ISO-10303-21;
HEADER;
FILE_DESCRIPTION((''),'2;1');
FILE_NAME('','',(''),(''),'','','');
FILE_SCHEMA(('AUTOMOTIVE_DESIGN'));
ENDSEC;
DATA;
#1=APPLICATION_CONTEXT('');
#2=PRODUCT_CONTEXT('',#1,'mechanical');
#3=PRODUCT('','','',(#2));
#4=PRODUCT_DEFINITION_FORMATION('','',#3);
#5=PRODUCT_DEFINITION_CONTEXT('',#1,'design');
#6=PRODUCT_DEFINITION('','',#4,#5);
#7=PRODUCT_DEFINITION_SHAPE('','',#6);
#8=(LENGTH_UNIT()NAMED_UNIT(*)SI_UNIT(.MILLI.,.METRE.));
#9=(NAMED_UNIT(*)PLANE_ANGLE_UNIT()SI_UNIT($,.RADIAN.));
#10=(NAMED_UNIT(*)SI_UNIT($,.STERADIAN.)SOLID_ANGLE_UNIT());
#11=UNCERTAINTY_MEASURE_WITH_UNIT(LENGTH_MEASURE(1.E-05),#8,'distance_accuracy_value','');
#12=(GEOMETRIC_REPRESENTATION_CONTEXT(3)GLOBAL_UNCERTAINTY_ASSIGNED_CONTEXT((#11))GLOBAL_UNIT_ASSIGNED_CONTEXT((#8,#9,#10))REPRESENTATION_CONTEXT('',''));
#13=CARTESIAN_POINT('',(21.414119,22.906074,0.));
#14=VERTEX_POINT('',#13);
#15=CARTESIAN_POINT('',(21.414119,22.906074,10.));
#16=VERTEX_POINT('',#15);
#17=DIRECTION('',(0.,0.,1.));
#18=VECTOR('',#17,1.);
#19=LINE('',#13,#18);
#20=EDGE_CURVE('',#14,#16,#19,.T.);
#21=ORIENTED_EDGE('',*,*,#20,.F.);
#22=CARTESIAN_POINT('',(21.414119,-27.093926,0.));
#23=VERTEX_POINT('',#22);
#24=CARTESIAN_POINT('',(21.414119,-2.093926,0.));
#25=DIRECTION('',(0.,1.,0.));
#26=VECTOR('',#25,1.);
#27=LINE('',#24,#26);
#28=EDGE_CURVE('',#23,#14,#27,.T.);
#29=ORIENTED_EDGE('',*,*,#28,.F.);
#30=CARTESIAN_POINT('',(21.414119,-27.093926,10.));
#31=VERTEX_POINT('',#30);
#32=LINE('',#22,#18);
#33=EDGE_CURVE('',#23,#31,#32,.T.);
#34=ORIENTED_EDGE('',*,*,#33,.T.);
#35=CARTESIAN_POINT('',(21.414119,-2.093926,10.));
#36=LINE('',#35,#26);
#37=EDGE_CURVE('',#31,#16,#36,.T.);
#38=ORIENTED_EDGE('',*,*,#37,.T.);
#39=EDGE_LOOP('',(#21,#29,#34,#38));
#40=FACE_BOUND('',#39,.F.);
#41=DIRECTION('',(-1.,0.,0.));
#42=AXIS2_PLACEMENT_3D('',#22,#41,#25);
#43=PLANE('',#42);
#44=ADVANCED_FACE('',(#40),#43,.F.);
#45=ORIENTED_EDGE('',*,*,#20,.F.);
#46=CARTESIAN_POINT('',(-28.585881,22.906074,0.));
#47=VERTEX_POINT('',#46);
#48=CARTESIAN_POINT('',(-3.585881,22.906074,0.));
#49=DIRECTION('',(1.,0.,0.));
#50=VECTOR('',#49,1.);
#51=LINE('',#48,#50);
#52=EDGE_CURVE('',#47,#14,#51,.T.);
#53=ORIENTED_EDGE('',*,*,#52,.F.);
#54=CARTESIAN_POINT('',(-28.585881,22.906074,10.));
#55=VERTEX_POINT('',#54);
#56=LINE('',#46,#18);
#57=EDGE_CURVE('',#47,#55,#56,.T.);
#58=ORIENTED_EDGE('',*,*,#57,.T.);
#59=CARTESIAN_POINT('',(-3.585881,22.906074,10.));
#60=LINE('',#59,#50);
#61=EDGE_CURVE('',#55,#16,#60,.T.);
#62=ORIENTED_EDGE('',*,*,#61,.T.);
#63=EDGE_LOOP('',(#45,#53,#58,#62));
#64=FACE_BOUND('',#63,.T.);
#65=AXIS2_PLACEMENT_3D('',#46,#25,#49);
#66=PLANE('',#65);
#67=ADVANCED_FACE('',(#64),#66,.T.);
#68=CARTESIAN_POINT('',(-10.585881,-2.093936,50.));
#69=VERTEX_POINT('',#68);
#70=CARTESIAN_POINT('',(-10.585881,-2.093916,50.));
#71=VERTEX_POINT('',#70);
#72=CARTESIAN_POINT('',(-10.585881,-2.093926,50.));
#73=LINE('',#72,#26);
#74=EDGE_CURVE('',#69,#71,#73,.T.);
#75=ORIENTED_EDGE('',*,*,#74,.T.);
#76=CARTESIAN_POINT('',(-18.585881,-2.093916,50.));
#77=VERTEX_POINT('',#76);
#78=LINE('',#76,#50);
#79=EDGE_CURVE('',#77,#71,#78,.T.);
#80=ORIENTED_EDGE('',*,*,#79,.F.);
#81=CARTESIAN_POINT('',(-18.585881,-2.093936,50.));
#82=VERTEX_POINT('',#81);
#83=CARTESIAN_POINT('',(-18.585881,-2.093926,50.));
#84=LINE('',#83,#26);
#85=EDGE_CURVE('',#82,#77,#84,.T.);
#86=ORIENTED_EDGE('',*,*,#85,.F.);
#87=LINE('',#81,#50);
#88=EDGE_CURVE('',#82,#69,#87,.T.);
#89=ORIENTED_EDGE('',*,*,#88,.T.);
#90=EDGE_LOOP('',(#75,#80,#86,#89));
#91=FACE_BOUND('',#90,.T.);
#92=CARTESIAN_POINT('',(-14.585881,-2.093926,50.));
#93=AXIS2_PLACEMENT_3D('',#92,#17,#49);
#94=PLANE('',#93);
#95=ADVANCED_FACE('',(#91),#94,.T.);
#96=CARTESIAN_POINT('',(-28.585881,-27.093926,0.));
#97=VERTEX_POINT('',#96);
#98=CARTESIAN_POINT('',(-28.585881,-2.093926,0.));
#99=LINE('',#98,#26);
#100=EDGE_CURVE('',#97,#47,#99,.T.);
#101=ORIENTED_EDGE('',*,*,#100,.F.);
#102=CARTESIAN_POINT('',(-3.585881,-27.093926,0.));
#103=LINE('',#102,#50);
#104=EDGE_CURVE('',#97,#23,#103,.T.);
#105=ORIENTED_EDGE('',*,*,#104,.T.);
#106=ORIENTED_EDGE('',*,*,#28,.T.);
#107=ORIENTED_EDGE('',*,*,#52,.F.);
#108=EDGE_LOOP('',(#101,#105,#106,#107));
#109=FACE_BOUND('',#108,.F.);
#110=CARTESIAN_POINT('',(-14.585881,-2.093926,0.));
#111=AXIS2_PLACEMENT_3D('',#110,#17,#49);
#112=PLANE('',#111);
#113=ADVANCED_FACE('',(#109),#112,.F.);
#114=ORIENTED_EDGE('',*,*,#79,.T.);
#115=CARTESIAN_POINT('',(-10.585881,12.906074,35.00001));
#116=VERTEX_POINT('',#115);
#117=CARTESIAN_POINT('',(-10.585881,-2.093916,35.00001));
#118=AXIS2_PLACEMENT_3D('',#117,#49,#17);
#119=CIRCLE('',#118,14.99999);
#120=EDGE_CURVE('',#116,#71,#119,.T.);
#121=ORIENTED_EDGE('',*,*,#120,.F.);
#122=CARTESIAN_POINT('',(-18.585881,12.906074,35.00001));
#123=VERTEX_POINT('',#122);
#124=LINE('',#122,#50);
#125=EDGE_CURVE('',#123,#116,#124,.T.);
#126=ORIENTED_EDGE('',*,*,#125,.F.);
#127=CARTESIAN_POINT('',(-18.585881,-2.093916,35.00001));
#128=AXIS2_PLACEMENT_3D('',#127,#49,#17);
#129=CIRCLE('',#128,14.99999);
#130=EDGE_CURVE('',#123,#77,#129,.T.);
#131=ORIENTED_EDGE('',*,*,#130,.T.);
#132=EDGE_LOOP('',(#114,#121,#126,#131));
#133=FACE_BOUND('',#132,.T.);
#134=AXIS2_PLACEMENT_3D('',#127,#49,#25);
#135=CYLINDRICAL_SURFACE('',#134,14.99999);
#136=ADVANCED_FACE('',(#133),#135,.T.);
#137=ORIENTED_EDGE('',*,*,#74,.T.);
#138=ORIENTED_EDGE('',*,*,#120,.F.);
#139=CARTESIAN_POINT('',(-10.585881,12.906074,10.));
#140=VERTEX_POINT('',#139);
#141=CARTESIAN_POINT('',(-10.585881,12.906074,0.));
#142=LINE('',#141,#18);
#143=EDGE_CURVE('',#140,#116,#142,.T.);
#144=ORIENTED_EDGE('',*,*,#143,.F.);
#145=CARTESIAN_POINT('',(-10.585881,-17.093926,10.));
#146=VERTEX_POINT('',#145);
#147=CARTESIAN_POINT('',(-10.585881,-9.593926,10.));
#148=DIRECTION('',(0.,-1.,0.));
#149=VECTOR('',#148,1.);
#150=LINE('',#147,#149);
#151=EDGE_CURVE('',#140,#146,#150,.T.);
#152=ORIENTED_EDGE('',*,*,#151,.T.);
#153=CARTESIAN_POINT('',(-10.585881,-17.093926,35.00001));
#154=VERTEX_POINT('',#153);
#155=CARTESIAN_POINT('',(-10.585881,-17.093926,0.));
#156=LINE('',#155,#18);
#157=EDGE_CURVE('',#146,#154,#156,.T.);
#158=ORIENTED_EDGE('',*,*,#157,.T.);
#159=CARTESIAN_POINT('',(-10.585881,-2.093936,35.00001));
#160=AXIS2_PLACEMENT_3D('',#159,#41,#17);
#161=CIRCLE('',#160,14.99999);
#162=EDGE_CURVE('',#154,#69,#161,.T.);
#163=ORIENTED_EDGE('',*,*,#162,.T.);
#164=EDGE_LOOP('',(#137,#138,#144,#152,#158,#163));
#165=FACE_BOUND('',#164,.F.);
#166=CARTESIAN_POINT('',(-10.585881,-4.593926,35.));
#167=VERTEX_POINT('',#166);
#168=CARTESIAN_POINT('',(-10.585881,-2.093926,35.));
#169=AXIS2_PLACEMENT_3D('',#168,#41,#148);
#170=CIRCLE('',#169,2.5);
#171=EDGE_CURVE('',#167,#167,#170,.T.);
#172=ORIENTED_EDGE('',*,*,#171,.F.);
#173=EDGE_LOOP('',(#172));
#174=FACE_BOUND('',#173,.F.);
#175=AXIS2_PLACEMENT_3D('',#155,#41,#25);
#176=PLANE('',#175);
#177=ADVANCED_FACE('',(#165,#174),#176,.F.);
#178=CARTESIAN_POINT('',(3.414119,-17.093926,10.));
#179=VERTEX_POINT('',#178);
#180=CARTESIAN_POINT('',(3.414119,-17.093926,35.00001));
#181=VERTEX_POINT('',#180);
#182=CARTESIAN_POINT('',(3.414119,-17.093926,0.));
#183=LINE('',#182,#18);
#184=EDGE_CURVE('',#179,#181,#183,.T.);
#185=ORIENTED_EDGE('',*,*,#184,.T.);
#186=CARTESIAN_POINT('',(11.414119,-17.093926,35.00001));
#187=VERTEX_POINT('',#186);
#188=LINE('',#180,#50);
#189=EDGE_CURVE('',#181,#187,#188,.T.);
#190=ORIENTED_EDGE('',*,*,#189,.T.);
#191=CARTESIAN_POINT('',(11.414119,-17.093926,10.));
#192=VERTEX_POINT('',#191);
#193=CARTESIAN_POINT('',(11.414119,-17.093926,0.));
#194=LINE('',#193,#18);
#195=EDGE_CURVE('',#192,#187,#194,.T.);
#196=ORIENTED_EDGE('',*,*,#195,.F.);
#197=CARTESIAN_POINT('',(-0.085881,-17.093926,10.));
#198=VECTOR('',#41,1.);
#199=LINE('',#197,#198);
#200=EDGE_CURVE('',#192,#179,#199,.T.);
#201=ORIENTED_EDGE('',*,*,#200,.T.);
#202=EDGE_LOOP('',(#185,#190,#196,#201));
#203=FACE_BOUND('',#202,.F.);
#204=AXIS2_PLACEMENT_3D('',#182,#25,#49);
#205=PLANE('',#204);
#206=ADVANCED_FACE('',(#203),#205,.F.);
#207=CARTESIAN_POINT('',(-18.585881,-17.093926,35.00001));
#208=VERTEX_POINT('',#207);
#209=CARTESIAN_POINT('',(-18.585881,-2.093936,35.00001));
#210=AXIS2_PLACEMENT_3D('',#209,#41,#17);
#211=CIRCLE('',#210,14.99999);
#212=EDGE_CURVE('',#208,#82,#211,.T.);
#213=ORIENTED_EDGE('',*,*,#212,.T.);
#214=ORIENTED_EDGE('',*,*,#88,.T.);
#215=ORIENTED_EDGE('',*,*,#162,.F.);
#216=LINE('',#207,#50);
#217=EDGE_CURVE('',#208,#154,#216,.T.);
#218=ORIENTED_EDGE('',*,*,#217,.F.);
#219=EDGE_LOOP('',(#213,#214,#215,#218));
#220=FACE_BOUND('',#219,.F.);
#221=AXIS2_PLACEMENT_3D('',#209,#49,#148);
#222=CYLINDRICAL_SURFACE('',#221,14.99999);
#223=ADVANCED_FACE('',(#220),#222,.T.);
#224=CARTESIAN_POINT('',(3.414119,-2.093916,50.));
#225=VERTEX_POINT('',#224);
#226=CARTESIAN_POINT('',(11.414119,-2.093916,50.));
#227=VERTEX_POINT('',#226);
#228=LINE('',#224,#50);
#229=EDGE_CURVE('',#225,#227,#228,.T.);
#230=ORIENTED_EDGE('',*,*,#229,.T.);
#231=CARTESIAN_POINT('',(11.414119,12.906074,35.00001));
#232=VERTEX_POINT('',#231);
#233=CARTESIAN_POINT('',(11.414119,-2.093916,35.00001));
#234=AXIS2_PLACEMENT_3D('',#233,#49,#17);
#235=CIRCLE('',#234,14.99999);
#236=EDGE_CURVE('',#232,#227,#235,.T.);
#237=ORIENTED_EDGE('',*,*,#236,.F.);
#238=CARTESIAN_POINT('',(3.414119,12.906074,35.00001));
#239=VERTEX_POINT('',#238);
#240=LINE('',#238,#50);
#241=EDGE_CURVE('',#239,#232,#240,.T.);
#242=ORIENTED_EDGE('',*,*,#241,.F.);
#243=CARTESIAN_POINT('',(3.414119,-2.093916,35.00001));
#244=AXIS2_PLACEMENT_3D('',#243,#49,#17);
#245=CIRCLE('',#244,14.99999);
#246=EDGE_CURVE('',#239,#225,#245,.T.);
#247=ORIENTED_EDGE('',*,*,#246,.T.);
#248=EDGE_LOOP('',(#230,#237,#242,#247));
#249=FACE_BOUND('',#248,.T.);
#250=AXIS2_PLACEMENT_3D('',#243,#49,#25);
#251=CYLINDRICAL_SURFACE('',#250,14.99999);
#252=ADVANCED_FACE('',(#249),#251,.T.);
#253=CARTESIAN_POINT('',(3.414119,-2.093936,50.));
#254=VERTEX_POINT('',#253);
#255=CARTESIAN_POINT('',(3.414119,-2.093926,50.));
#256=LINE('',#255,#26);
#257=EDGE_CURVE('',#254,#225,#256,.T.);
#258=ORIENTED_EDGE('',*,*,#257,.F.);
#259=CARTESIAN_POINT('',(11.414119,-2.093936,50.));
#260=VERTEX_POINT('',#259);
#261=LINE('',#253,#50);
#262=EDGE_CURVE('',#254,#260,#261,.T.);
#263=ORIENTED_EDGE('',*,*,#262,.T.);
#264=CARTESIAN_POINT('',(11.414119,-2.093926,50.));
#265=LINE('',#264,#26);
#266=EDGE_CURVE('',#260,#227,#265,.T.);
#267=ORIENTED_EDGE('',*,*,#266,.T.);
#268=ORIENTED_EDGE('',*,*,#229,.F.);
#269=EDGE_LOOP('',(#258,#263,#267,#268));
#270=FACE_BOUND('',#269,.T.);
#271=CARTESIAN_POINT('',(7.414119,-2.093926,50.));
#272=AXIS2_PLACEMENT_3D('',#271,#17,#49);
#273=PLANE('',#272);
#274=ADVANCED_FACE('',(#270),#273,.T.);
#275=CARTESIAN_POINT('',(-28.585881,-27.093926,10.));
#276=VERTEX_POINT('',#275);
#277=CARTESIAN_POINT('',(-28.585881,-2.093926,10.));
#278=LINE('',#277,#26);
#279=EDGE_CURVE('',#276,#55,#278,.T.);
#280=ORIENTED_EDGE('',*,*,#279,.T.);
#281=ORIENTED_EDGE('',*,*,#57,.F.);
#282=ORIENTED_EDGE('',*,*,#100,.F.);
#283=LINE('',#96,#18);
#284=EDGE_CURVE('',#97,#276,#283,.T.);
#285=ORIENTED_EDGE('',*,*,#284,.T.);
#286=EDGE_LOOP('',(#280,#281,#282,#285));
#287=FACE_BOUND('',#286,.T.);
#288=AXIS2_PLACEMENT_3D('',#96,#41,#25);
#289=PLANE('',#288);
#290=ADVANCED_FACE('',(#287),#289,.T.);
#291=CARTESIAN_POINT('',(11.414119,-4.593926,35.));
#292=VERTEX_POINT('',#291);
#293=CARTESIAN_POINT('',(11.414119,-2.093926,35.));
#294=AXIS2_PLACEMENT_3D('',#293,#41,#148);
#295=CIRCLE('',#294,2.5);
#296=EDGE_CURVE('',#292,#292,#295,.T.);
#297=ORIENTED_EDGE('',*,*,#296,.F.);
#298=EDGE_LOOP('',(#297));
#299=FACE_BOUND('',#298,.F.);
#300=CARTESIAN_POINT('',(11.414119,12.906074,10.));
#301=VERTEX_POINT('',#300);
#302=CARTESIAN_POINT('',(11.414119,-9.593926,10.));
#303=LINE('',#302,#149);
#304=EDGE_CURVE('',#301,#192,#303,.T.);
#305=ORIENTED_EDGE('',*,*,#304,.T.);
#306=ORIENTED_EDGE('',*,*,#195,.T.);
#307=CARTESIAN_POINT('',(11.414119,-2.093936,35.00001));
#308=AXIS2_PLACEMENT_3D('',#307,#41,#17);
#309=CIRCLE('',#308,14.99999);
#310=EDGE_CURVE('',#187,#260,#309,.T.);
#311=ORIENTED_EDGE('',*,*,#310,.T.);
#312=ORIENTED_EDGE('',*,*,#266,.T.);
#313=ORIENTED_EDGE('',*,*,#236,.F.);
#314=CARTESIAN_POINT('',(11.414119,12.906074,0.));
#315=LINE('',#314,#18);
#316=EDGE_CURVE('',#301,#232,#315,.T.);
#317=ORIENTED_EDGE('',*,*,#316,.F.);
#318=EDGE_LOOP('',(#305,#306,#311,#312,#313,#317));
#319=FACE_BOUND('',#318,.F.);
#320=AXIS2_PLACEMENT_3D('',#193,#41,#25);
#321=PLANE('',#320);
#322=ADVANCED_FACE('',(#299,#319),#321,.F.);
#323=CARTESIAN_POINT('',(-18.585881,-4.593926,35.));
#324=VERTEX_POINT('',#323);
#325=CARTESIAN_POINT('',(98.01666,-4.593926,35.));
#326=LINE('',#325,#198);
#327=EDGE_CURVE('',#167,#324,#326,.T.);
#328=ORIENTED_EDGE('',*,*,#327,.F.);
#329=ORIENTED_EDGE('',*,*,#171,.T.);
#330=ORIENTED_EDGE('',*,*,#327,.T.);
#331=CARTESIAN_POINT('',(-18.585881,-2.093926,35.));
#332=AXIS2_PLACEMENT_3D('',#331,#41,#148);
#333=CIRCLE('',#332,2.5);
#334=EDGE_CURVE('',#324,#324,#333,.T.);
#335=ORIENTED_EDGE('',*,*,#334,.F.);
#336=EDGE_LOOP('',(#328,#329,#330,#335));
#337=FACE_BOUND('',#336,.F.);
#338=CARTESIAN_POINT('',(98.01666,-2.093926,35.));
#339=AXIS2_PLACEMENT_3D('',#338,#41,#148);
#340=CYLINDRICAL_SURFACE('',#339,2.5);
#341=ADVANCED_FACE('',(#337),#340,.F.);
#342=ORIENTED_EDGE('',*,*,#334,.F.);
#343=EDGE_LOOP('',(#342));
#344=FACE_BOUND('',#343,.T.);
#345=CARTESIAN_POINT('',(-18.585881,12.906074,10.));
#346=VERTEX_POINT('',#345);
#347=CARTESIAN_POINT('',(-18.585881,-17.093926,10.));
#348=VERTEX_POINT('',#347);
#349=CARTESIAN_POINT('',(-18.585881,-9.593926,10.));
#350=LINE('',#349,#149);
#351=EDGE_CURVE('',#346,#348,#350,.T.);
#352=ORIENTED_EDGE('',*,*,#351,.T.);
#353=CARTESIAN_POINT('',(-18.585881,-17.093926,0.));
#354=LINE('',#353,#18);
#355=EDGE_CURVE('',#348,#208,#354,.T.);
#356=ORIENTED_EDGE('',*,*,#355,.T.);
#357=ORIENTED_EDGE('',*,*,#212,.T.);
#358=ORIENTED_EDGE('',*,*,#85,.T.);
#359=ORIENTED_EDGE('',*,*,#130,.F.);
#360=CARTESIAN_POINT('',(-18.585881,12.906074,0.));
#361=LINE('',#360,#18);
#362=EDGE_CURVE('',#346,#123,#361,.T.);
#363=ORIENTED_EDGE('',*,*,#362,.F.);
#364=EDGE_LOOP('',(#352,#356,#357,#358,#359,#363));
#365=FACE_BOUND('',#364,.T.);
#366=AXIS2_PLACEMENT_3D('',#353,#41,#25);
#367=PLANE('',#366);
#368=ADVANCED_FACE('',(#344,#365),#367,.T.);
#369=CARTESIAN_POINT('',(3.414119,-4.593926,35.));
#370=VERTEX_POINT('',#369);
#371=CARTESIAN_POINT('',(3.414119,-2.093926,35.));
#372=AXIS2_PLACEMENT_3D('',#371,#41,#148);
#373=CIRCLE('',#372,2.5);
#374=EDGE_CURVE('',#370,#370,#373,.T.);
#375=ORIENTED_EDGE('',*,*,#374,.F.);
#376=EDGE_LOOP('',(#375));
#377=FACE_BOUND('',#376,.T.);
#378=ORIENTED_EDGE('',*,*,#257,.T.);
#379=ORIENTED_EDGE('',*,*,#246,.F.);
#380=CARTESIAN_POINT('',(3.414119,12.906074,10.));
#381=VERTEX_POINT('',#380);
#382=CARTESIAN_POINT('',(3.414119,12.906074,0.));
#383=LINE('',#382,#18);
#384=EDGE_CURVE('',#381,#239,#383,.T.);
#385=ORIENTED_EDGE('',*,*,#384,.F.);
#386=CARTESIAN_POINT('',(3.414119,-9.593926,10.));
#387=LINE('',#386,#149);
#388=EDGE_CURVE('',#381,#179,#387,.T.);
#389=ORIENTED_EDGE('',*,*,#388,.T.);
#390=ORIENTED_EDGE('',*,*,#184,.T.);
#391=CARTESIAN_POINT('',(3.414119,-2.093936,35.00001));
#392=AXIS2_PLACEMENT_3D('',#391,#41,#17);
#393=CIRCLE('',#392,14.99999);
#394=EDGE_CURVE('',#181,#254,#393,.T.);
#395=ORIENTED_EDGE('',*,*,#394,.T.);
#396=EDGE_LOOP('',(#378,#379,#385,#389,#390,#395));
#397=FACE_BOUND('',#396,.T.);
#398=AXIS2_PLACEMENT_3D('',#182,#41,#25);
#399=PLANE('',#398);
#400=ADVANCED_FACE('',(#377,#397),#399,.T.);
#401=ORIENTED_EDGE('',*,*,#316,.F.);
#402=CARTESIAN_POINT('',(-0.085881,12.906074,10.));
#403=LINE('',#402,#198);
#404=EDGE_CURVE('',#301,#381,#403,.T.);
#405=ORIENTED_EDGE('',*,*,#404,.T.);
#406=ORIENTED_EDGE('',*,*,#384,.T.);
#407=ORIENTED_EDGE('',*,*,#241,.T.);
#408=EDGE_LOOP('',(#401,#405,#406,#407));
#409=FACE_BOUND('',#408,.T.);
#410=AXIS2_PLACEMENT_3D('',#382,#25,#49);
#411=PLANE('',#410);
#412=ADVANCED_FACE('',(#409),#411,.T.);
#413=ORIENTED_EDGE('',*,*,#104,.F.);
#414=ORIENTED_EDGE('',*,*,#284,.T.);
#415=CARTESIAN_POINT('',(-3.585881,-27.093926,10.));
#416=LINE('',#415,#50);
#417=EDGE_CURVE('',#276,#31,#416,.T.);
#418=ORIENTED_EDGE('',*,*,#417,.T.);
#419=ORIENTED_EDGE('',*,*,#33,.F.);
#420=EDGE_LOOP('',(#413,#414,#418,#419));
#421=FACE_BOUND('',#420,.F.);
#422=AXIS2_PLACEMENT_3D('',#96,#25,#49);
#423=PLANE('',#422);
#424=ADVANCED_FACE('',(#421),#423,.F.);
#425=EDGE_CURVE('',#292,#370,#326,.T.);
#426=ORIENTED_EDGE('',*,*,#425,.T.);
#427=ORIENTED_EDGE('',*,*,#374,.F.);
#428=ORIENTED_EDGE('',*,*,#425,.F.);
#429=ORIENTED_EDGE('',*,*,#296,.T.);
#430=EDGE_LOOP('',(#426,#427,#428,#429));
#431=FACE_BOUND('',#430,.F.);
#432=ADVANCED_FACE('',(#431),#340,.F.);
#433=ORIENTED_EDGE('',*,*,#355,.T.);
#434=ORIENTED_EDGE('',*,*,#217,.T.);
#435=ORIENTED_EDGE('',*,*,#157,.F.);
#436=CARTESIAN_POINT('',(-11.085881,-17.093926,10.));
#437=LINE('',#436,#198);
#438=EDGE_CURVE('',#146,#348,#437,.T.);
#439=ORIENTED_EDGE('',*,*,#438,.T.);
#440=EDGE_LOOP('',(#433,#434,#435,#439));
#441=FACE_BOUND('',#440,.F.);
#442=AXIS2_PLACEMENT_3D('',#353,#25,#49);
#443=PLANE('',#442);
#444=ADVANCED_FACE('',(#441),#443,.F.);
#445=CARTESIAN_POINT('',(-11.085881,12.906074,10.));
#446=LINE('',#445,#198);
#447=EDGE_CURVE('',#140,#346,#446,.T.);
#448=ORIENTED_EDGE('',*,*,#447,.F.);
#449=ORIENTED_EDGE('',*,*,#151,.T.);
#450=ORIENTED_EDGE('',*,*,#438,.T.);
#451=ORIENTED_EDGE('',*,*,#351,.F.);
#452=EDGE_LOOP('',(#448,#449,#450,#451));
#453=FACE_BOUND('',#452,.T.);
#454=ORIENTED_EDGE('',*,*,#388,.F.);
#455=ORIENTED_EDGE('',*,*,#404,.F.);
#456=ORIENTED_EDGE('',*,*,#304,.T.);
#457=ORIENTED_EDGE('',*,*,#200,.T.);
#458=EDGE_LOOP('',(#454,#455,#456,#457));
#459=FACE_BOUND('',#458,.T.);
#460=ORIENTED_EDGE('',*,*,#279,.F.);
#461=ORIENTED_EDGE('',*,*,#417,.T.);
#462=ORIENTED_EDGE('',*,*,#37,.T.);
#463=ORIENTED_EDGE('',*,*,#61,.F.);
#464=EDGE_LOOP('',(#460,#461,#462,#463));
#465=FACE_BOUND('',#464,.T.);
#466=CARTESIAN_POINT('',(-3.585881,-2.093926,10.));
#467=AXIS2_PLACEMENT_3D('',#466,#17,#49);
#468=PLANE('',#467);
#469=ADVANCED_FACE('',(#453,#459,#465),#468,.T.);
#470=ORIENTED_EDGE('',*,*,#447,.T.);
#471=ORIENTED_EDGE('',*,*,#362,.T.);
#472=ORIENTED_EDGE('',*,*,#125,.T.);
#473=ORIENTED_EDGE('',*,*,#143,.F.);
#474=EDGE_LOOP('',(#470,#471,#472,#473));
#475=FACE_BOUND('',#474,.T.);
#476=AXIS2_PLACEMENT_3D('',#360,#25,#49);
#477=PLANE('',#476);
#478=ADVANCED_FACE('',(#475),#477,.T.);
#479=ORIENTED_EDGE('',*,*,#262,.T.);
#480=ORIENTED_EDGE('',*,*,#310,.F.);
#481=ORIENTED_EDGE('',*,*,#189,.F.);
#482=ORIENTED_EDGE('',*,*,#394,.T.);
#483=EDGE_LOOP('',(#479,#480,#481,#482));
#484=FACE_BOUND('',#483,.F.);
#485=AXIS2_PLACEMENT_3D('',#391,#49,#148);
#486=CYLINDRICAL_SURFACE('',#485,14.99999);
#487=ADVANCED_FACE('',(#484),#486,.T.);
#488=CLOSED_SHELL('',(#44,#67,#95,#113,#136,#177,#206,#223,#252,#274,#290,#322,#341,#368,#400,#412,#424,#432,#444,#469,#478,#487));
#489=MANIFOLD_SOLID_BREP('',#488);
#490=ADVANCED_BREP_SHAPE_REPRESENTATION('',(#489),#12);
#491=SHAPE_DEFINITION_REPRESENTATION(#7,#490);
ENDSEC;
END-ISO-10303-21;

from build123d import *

# Parameters (mm, degrees)
F0_W     = 50
F0_H     = 50
F1_DEPTH = 10
F2_W     = 8
F2_H     = 30
F3_DEPTH = 50
F4_R     = 14.99999
F6_D     = 5


# Not quite as in the source:
# - a fillet or chamfer is up to 0.001 mm smaller than in the source, because OpenCascade refuses the exact size


with BuildPart() as f1:
    # F0 (on Top) → F1 (new body)
    with BuildSketch(Plane.XY):
        with Locations((-3.5858808544, -2.0939260721)):
            Rectangle(F0_W, F0_H)
    extrude(amount=F1_DEPTH)

    # F2 (on Top) → F3 (join)
    with BuildSketch(Plane.XY):
        with Locations((-14.5858808544, -2.0939260721)):
            Rectangle(F2_W, F2_H)
        with Locations((7.4141191456, -2.0939260721)):
            Rectangle(F2_W, F2_H)
    extrude(amount=F3_DEPTH)

    # F4 (radius 15 in the source; OpenCascade refuses exactly that, so slightly less here)
    f4_edges = [f1.edges().sort_by_distance(p)[0] for p in [
        (-14.585881, -17.093926, 50),
        (-14.585881, 12.906074, 50),
        (7.414119, -17.093926, 50),
        (7.414119, 12.906074, 50),
    ]]
    fillet(f4_edges, radius=F4_R)

    # F6 (through all)
    with Locations(Plane.YZ.offset(11.4141191456)):
        with Locations((-2.0939260721, 35)):
            Hole(F6_D / 2)


solid = f1.part
